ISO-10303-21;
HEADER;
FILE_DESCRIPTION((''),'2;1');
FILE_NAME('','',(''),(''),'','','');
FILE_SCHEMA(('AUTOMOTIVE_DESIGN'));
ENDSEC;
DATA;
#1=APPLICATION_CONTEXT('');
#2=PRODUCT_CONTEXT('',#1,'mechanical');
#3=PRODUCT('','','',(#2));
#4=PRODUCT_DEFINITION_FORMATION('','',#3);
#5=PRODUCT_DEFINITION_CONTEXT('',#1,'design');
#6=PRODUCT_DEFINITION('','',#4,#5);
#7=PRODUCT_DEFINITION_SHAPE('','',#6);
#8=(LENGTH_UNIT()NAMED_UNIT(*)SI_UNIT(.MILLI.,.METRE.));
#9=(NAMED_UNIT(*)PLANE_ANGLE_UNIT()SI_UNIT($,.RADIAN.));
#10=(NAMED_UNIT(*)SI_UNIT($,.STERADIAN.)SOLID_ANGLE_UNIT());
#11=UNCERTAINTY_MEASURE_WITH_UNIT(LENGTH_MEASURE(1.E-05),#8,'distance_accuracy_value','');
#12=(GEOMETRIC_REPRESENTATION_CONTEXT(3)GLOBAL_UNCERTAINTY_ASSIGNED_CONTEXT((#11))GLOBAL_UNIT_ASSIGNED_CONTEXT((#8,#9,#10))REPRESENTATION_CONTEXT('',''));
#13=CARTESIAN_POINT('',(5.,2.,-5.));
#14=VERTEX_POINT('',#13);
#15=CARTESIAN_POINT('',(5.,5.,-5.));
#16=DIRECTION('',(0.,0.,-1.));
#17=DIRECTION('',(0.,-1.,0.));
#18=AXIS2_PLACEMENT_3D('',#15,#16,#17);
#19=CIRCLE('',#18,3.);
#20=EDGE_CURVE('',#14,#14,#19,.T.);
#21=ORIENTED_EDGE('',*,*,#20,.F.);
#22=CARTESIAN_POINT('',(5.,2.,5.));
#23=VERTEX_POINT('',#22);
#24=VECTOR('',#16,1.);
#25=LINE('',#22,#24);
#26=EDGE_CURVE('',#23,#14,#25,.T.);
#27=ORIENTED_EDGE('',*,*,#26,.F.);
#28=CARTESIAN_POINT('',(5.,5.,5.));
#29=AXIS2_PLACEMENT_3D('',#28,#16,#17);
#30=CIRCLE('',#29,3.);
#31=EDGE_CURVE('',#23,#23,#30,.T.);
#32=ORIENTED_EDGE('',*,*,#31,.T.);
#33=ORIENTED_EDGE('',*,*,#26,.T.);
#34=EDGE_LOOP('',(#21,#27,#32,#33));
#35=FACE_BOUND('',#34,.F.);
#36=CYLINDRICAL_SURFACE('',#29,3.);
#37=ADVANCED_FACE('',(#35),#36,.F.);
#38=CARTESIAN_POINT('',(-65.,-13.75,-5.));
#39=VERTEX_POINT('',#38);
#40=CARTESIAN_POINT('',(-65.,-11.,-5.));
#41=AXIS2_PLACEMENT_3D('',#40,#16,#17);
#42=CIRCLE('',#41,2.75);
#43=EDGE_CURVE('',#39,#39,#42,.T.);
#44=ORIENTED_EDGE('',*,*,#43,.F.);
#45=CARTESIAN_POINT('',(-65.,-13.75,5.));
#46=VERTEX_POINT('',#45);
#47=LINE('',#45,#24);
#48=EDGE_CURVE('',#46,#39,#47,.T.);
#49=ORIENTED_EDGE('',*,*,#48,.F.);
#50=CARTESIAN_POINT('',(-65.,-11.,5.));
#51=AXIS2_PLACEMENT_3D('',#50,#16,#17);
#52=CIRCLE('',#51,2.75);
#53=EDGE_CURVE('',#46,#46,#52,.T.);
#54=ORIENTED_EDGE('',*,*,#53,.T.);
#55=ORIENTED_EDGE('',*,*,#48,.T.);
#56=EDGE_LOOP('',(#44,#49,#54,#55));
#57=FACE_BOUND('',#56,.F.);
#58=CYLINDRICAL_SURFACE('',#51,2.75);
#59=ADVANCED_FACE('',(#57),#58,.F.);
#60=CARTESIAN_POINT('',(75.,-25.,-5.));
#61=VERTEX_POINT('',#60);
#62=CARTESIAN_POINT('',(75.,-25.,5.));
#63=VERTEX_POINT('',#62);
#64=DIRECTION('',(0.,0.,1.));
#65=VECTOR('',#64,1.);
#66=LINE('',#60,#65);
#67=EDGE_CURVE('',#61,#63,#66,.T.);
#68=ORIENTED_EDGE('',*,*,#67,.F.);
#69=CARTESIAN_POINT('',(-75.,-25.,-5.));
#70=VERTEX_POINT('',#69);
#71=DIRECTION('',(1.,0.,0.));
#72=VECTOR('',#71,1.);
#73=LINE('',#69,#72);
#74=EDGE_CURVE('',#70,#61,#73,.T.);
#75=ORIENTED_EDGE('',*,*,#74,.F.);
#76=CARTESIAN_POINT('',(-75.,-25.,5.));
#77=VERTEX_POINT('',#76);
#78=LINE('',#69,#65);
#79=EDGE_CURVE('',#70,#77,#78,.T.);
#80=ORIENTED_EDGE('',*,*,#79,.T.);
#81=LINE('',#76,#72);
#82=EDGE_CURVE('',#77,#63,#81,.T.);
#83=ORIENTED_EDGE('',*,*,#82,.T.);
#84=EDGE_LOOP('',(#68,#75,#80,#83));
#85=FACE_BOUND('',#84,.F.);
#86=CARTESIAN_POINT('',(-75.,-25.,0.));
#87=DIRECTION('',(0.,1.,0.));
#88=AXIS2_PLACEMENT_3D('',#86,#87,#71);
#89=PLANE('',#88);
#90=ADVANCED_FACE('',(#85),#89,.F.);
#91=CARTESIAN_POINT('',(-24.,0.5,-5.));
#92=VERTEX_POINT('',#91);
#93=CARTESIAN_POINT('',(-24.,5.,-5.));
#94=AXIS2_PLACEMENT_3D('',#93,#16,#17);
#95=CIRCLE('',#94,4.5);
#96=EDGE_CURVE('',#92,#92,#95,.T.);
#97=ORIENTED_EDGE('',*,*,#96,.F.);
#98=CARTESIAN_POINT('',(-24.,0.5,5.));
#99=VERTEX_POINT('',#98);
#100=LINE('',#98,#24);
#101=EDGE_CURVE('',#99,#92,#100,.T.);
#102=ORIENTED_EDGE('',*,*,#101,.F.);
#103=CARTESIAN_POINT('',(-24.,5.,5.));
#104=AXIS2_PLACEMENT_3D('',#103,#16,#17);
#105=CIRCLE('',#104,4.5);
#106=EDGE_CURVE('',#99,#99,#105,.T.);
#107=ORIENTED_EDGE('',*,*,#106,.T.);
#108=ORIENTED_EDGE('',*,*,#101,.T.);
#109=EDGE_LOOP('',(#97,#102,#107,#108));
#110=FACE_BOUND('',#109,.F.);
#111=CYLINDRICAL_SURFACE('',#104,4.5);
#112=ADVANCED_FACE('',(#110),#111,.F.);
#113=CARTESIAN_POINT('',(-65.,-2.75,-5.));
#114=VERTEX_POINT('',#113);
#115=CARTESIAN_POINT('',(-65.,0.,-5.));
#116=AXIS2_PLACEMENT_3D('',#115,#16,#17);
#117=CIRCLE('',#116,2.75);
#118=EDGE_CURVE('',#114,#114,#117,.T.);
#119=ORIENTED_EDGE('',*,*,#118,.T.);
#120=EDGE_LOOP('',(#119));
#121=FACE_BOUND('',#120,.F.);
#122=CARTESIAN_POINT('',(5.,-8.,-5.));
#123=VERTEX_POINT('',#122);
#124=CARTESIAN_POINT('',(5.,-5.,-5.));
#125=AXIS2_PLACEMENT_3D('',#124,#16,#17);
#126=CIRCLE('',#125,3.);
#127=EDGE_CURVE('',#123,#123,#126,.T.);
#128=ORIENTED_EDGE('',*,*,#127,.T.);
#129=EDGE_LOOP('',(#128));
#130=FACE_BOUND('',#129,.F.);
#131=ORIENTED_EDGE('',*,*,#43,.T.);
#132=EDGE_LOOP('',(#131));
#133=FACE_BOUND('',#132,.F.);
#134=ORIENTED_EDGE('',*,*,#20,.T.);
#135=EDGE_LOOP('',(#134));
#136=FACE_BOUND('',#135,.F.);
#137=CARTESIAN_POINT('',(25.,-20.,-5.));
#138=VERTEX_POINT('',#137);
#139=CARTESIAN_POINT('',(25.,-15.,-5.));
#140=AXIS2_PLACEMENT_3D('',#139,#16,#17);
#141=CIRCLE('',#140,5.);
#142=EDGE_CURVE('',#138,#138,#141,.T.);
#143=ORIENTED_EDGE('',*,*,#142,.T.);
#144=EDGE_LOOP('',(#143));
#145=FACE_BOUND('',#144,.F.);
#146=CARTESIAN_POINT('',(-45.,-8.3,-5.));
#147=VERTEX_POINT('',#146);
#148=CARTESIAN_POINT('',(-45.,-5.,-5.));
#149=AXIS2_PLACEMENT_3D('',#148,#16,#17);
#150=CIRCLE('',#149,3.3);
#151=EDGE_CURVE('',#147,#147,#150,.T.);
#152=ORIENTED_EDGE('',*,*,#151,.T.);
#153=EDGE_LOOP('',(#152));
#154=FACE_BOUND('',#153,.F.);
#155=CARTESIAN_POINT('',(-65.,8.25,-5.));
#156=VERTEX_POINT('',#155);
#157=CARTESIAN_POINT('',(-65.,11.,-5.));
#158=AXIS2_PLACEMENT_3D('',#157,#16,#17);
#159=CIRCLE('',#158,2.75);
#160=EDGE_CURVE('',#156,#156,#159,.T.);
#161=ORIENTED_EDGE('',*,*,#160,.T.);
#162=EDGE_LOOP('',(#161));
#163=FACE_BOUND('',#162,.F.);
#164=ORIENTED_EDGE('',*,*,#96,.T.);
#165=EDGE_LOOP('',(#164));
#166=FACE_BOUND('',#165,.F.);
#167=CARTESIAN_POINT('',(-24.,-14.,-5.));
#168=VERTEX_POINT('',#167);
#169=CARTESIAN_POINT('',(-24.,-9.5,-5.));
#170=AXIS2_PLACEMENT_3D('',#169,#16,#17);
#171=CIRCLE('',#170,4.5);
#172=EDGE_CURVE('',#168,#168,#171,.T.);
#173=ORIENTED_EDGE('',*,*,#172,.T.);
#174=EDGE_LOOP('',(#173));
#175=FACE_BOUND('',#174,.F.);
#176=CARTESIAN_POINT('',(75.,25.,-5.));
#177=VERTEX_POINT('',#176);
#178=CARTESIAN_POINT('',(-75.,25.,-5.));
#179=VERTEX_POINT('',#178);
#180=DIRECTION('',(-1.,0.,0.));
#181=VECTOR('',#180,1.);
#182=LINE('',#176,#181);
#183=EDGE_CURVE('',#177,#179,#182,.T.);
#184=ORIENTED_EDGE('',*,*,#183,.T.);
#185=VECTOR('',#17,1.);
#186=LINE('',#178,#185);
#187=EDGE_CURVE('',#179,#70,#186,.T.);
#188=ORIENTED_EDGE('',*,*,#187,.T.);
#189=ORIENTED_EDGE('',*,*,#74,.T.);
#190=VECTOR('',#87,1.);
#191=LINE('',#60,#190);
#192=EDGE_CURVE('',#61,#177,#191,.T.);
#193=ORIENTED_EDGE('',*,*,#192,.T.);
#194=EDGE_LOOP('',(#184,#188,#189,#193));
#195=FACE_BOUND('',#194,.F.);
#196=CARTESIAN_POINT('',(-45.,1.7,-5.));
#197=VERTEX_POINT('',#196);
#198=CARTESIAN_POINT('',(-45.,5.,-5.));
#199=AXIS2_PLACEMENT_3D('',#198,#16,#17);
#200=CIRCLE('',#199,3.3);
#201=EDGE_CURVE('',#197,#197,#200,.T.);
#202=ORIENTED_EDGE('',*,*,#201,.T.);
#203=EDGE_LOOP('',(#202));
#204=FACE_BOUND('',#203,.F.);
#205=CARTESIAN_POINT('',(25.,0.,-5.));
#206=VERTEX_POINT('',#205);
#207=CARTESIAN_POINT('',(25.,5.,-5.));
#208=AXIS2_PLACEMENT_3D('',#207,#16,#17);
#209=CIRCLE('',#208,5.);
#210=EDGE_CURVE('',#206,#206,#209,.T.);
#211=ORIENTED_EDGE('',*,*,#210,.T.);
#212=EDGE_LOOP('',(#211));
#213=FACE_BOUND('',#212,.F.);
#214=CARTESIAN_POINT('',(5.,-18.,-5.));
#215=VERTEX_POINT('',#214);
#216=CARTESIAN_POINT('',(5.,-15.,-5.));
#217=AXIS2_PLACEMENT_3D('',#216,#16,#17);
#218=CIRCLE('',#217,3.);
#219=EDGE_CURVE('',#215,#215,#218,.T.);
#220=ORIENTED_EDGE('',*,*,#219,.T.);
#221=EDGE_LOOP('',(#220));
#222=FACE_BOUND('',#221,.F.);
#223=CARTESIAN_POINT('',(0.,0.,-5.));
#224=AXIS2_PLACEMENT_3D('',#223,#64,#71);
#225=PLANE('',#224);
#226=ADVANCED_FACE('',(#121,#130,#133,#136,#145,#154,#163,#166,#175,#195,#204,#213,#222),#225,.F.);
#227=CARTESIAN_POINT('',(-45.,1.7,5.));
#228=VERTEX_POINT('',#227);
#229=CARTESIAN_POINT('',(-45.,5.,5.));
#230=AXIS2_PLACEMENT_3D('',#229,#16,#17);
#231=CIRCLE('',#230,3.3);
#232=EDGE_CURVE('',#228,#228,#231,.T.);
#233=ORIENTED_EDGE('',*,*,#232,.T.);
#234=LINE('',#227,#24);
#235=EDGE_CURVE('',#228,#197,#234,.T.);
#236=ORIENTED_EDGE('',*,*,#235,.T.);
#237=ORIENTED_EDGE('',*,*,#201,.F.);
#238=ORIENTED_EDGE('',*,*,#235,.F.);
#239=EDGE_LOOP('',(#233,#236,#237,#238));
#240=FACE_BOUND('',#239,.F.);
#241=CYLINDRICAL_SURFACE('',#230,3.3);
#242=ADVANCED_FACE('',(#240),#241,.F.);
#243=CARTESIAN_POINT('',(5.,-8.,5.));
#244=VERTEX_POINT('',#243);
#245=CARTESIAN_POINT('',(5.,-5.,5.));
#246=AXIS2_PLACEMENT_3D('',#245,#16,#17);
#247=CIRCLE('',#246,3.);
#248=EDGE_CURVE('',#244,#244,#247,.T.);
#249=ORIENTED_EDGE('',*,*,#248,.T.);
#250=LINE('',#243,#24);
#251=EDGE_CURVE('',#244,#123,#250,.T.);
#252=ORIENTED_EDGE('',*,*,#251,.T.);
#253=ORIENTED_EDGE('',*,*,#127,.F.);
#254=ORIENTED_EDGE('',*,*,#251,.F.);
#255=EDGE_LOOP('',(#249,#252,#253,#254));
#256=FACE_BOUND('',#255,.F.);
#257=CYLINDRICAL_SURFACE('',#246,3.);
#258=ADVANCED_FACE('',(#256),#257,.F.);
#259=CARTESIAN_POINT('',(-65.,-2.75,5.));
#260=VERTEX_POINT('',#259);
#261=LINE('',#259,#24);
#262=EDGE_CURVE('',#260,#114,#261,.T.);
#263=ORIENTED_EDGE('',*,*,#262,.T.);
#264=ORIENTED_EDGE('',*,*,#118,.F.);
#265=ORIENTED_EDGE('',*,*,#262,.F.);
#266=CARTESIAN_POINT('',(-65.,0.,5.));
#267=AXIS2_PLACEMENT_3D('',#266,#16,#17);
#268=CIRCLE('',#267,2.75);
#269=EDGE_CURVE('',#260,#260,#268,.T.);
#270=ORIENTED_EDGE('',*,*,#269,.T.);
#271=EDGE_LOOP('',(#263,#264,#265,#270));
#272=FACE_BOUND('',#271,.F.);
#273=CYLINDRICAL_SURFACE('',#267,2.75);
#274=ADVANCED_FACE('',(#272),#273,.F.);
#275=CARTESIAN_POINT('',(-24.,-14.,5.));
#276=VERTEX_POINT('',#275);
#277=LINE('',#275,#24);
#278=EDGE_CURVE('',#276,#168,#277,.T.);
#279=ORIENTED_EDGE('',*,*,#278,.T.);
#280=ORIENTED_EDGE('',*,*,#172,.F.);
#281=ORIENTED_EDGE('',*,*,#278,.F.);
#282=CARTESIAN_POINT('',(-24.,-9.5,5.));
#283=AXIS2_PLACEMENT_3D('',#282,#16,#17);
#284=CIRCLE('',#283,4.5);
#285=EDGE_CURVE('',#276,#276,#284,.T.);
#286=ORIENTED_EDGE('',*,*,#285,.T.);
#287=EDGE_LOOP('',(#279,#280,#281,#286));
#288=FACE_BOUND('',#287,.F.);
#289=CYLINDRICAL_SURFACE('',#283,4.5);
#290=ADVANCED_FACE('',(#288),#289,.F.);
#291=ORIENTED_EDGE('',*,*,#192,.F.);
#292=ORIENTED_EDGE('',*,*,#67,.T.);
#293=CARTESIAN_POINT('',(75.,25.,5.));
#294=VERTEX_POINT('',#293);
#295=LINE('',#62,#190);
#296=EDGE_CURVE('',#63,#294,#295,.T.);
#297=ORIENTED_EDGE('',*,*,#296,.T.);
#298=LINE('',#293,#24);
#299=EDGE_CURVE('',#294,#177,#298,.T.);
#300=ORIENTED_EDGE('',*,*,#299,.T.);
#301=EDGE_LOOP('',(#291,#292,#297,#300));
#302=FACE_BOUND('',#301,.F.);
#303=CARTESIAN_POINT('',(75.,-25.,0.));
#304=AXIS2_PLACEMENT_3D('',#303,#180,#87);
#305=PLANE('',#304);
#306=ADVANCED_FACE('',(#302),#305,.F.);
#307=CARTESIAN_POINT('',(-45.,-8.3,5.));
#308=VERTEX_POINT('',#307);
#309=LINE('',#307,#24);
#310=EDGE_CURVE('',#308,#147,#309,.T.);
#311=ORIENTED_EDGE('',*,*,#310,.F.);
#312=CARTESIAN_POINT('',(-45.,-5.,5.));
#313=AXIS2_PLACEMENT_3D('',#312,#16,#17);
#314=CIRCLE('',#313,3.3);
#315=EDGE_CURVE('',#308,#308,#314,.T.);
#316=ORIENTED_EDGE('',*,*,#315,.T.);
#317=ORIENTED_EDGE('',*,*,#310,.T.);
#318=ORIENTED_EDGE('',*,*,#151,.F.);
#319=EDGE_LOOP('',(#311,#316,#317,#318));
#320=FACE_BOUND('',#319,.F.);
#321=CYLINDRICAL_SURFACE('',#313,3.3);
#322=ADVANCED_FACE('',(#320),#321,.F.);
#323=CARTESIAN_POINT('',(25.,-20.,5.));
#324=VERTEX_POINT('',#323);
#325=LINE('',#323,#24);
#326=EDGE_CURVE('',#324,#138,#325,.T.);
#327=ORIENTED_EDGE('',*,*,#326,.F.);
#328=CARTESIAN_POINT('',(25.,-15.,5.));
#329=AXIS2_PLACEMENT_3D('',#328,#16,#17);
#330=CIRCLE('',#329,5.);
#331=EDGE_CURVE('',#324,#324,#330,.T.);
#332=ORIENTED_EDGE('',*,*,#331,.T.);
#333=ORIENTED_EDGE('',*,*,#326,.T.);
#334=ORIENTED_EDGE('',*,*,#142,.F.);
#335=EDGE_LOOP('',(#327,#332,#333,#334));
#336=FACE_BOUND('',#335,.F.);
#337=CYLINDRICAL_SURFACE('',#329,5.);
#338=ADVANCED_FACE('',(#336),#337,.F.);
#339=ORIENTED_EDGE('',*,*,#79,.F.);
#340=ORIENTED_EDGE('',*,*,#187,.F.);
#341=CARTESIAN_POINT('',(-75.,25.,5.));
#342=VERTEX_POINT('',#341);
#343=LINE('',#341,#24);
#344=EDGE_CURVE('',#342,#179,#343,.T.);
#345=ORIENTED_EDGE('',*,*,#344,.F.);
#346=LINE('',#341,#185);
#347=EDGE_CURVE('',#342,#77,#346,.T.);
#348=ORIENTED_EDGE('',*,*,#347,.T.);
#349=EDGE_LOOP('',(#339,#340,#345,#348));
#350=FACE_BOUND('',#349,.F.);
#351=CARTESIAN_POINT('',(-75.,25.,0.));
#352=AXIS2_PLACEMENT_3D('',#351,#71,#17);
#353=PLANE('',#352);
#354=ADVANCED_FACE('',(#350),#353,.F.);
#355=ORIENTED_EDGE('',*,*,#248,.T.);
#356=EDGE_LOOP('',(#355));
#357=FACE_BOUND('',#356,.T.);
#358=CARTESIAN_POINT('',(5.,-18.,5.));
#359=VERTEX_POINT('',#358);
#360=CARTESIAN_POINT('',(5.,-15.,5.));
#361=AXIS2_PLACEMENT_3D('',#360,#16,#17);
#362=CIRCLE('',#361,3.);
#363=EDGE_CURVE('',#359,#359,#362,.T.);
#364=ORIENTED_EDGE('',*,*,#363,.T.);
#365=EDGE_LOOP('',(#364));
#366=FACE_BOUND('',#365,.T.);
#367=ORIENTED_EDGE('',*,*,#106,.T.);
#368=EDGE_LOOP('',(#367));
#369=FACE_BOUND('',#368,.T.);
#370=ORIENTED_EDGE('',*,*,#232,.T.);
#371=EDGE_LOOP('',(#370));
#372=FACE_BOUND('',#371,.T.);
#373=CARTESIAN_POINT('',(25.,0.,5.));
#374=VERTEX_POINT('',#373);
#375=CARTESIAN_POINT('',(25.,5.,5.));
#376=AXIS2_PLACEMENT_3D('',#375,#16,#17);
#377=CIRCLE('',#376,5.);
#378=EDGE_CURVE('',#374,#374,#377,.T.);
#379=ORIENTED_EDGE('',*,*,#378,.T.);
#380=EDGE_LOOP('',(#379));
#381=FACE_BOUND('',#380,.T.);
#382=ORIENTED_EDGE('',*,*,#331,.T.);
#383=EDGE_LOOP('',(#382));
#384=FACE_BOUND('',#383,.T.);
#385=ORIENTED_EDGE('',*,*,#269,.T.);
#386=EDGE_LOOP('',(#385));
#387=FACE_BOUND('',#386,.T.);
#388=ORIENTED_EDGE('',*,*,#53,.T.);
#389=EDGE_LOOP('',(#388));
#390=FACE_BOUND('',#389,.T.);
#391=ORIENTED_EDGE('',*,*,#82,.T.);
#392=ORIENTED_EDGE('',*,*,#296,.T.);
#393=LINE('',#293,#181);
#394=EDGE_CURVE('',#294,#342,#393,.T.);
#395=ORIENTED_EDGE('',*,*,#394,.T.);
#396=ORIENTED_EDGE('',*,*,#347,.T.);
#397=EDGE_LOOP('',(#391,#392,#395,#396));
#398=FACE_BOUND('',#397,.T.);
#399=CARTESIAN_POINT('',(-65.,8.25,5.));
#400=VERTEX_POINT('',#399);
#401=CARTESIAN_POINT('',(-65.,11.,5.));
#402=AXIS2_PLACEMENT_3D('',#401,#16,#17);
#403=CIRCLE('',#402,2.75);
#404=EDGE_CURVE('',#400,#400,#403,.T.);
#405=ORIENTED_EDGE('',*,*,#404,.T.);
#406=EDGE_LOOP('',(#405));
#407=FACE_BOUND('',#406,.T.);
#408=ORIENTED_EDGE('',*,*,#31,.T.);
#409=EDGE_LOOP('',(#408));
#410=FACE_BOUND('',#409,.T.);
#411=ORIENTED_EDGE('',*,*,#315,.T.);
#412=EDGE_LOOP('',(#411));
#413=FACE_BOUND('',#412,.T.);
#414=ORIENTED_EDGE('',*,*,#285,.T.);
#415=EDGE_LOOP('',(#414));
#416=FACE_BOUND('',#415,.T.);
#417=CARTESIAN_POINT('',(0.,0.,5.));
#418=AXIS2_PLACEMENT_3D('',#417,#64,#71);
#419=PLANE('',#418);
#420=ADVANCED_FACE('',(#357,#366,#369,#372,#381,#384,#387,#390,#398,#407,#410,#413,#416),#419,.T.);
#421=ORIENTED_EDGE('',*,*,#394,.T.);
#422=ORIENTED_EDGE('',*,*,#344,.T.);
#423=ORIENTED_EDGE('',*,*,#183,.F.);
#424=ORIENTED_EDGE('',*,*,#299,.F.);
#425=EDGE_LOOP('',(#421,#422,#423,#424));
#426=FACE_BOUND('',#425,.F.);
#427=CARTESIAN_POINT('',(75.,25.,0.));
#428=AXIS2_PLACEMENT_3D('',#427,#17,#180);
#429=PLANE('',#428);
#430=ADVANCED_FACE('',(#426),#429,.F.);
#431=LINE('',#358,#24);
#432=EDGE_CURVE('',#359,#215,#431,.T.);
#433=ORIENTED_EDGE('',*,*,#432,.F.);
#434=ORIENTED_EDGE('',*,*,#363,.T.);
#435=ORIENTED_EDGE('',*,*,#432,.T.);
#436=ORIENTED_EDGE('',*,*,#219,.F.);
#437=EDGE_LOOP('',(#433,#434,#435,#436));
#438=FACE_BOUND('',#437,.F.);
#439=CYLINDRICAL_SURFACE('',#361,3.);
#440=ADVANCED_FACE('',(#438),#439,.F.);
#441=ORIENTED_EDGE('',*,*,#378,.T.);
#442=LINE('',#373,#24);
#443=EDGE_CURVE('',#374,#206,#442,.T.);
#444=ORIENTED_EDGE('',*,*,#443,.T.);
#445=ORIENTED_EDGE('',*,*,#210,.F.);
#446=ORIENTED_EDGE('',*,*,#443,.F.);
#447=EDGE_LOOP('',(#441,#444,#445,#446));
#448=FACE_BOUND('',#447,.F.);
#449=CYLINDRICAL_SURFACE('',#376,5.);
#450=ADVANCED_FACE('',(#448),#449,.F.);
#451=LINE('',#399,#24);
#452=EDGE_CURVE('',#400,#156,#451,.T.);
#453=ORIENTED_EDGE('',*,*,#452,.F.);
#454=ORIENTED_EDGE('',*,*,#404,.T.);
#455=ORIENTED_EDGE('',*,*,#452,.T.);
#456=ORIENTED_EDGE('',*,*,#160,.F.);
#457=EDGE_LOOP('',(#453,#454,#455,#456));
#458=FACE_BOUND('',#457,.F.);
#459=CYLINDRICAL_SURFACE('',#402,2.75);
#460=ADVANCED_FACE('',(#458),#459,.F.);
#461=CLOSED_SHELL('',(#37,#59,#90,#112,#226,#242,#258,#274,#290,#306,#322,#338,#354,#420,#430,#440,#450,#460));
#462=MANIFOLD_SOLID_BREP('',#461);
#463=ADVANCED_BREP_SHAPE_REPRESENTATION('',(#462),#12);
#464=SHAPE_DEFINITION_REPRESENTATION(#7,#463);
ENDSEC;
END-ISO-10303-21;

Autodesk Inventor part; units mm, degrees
ref_plane "YZ Plane" through (0, 0, 0) normal (1, 0, 0) x (0, 1, 0)
ref_plane "XZ Plane" through (0, 0, 0) normal (0, 1, 0) x (-1, 0, 0)
ref_plane "XY Plane" through (0, 0, 0) normal (0, 0, 1) x (1, 0, 0)
sketch "Sketch2" plane through (0, 0, 0) normal (0, 0, 1) x (1, 0, 0)
  line L0 (-75, -25) -> (75, -25)
  line L1 (75, -25) -> (75, 25)
  line L2 (75, 25) -> (-75, 25)
  line L3 (-75, 25) -> (-75, -25)
  line L4 (-75, -25) -> (75, 25) construction
  line L5 (75, -25) -> (-75, 25) construction
  point P0 (0, 0)
  dimension "d1" = 150
  dimension "d2" = 50
extrude "Extrusion1" add sketch "Sketch2" along normal mid plane 10
sketch "Sketch3" plane through (0, 0, 5) normal (0, 0, 1) x (1, 0, 0)
  line L0 (-75, 25) -> (-75, -25) projected
  line L1 (75, 25) -> (-75, 25) projected
  point P0 (0, 0)
  point P1 (-65, 0)
  dimension "d40" = 10
  dimension "d43" = 25
hole "Hole1" at (-65, 0, 5) direction (0, 0, -1) diameter 5.5 depth 14.2 tip angle 118 clearance for "Socket Head Cap Screw" size "M5" standard "TS Profile"
sketch "Sketch4" plane through (0, 0, 5) normal (0, 0, 1) x (1, 0, 0)
  line L0 (-75, 25) -> (-75, -25) projected
  line L1 (75, 25) -> (-75, 25) projected
  point P0 (0, 0)
  point P1 (-45, 5)
  dimension "d41" = 30
  dimension "d42" = 20
hole "Hole2" at (-45, 5, 5) direction (0, 0, -1) diameter 6.6 depth 14.2 tip angle 118 clearance for "Socket Head Cap Screw" size "M6" standard "TS Profile"
sketch "Sketch5" plane through (0, 0, 5) normal (0, 0, 1) x (1, 0, 0)
  line L0 (-75, 25) -> (-75, -25) projected
  line L1 (75, 25) -> (-75, 25) projected
  point P0 (0, 0)
  point P1 (-24, 5)
  dimension "d44" = 51
  dimension "d45" = 20
hole "Hole3" at (-24, 5, 5) direction (0, 0, -1) diameter 9 depth 14.2 tip angle 118 clearance for "Socket Head Cap Screw" size "M8" standard "TS Profile"
sketch "Sketch6" plane through (0, 0, 5) normal (0, 0, 1) x (1, 0, 0)
  line L0 (-75, 25) -> (-75, -25) projected
  line L1 (75, 25) -> (-75, 25) projected
  point P0 (0, 0)
  point P1 (5, 5)
  dimension "d46" = 80
  dimension "d47" = 20
hole "Hole4" at (5, 5, 5) direction (0, 0, -1) diameter 6 depth 14.2 tip angle 118
sketch "Sketch7" plane through (0, 0, 5) normal (0, 0, 1) x (1, 0, 0)
  line L0 (-75, 25) -> (-75, -25) projected
  line L1 (75, 25) -> (-75, 25) projected
  point P0 (0, 0)
  point P1 (25, 5)
  dimension "d48" = 100
  dimension "d49" = 20
hole "Hole5" at (25, 5, 5) direction (0, 0, -1) diameter 10 depth 14.2 tip angle 118
pattern_linear "Rectangular Pattern1" count 3 spacing 11 along (0, -1, 0) of "Hole1" first direction both ways yes
pattern_linear "Rectangular Pattern2" count 2 spacing 10 along (0, -1, 0) of "Hole2"
pattern_linear "Rectangular Pattern3" count 2 spacing 14.5 along (0, -1, 0) of "Hole3"
pattern_linear "Rectangular Pattern4" count 3 spacing 10 along (0, -1, 0) of "Hole4"
pattern_linear "Rectangular Pattern5" count 2 spacing 20 along (0, -1, 0) of "Hole5"
properties part number "홀간 거리 확인 파트-9" material "SS400"
